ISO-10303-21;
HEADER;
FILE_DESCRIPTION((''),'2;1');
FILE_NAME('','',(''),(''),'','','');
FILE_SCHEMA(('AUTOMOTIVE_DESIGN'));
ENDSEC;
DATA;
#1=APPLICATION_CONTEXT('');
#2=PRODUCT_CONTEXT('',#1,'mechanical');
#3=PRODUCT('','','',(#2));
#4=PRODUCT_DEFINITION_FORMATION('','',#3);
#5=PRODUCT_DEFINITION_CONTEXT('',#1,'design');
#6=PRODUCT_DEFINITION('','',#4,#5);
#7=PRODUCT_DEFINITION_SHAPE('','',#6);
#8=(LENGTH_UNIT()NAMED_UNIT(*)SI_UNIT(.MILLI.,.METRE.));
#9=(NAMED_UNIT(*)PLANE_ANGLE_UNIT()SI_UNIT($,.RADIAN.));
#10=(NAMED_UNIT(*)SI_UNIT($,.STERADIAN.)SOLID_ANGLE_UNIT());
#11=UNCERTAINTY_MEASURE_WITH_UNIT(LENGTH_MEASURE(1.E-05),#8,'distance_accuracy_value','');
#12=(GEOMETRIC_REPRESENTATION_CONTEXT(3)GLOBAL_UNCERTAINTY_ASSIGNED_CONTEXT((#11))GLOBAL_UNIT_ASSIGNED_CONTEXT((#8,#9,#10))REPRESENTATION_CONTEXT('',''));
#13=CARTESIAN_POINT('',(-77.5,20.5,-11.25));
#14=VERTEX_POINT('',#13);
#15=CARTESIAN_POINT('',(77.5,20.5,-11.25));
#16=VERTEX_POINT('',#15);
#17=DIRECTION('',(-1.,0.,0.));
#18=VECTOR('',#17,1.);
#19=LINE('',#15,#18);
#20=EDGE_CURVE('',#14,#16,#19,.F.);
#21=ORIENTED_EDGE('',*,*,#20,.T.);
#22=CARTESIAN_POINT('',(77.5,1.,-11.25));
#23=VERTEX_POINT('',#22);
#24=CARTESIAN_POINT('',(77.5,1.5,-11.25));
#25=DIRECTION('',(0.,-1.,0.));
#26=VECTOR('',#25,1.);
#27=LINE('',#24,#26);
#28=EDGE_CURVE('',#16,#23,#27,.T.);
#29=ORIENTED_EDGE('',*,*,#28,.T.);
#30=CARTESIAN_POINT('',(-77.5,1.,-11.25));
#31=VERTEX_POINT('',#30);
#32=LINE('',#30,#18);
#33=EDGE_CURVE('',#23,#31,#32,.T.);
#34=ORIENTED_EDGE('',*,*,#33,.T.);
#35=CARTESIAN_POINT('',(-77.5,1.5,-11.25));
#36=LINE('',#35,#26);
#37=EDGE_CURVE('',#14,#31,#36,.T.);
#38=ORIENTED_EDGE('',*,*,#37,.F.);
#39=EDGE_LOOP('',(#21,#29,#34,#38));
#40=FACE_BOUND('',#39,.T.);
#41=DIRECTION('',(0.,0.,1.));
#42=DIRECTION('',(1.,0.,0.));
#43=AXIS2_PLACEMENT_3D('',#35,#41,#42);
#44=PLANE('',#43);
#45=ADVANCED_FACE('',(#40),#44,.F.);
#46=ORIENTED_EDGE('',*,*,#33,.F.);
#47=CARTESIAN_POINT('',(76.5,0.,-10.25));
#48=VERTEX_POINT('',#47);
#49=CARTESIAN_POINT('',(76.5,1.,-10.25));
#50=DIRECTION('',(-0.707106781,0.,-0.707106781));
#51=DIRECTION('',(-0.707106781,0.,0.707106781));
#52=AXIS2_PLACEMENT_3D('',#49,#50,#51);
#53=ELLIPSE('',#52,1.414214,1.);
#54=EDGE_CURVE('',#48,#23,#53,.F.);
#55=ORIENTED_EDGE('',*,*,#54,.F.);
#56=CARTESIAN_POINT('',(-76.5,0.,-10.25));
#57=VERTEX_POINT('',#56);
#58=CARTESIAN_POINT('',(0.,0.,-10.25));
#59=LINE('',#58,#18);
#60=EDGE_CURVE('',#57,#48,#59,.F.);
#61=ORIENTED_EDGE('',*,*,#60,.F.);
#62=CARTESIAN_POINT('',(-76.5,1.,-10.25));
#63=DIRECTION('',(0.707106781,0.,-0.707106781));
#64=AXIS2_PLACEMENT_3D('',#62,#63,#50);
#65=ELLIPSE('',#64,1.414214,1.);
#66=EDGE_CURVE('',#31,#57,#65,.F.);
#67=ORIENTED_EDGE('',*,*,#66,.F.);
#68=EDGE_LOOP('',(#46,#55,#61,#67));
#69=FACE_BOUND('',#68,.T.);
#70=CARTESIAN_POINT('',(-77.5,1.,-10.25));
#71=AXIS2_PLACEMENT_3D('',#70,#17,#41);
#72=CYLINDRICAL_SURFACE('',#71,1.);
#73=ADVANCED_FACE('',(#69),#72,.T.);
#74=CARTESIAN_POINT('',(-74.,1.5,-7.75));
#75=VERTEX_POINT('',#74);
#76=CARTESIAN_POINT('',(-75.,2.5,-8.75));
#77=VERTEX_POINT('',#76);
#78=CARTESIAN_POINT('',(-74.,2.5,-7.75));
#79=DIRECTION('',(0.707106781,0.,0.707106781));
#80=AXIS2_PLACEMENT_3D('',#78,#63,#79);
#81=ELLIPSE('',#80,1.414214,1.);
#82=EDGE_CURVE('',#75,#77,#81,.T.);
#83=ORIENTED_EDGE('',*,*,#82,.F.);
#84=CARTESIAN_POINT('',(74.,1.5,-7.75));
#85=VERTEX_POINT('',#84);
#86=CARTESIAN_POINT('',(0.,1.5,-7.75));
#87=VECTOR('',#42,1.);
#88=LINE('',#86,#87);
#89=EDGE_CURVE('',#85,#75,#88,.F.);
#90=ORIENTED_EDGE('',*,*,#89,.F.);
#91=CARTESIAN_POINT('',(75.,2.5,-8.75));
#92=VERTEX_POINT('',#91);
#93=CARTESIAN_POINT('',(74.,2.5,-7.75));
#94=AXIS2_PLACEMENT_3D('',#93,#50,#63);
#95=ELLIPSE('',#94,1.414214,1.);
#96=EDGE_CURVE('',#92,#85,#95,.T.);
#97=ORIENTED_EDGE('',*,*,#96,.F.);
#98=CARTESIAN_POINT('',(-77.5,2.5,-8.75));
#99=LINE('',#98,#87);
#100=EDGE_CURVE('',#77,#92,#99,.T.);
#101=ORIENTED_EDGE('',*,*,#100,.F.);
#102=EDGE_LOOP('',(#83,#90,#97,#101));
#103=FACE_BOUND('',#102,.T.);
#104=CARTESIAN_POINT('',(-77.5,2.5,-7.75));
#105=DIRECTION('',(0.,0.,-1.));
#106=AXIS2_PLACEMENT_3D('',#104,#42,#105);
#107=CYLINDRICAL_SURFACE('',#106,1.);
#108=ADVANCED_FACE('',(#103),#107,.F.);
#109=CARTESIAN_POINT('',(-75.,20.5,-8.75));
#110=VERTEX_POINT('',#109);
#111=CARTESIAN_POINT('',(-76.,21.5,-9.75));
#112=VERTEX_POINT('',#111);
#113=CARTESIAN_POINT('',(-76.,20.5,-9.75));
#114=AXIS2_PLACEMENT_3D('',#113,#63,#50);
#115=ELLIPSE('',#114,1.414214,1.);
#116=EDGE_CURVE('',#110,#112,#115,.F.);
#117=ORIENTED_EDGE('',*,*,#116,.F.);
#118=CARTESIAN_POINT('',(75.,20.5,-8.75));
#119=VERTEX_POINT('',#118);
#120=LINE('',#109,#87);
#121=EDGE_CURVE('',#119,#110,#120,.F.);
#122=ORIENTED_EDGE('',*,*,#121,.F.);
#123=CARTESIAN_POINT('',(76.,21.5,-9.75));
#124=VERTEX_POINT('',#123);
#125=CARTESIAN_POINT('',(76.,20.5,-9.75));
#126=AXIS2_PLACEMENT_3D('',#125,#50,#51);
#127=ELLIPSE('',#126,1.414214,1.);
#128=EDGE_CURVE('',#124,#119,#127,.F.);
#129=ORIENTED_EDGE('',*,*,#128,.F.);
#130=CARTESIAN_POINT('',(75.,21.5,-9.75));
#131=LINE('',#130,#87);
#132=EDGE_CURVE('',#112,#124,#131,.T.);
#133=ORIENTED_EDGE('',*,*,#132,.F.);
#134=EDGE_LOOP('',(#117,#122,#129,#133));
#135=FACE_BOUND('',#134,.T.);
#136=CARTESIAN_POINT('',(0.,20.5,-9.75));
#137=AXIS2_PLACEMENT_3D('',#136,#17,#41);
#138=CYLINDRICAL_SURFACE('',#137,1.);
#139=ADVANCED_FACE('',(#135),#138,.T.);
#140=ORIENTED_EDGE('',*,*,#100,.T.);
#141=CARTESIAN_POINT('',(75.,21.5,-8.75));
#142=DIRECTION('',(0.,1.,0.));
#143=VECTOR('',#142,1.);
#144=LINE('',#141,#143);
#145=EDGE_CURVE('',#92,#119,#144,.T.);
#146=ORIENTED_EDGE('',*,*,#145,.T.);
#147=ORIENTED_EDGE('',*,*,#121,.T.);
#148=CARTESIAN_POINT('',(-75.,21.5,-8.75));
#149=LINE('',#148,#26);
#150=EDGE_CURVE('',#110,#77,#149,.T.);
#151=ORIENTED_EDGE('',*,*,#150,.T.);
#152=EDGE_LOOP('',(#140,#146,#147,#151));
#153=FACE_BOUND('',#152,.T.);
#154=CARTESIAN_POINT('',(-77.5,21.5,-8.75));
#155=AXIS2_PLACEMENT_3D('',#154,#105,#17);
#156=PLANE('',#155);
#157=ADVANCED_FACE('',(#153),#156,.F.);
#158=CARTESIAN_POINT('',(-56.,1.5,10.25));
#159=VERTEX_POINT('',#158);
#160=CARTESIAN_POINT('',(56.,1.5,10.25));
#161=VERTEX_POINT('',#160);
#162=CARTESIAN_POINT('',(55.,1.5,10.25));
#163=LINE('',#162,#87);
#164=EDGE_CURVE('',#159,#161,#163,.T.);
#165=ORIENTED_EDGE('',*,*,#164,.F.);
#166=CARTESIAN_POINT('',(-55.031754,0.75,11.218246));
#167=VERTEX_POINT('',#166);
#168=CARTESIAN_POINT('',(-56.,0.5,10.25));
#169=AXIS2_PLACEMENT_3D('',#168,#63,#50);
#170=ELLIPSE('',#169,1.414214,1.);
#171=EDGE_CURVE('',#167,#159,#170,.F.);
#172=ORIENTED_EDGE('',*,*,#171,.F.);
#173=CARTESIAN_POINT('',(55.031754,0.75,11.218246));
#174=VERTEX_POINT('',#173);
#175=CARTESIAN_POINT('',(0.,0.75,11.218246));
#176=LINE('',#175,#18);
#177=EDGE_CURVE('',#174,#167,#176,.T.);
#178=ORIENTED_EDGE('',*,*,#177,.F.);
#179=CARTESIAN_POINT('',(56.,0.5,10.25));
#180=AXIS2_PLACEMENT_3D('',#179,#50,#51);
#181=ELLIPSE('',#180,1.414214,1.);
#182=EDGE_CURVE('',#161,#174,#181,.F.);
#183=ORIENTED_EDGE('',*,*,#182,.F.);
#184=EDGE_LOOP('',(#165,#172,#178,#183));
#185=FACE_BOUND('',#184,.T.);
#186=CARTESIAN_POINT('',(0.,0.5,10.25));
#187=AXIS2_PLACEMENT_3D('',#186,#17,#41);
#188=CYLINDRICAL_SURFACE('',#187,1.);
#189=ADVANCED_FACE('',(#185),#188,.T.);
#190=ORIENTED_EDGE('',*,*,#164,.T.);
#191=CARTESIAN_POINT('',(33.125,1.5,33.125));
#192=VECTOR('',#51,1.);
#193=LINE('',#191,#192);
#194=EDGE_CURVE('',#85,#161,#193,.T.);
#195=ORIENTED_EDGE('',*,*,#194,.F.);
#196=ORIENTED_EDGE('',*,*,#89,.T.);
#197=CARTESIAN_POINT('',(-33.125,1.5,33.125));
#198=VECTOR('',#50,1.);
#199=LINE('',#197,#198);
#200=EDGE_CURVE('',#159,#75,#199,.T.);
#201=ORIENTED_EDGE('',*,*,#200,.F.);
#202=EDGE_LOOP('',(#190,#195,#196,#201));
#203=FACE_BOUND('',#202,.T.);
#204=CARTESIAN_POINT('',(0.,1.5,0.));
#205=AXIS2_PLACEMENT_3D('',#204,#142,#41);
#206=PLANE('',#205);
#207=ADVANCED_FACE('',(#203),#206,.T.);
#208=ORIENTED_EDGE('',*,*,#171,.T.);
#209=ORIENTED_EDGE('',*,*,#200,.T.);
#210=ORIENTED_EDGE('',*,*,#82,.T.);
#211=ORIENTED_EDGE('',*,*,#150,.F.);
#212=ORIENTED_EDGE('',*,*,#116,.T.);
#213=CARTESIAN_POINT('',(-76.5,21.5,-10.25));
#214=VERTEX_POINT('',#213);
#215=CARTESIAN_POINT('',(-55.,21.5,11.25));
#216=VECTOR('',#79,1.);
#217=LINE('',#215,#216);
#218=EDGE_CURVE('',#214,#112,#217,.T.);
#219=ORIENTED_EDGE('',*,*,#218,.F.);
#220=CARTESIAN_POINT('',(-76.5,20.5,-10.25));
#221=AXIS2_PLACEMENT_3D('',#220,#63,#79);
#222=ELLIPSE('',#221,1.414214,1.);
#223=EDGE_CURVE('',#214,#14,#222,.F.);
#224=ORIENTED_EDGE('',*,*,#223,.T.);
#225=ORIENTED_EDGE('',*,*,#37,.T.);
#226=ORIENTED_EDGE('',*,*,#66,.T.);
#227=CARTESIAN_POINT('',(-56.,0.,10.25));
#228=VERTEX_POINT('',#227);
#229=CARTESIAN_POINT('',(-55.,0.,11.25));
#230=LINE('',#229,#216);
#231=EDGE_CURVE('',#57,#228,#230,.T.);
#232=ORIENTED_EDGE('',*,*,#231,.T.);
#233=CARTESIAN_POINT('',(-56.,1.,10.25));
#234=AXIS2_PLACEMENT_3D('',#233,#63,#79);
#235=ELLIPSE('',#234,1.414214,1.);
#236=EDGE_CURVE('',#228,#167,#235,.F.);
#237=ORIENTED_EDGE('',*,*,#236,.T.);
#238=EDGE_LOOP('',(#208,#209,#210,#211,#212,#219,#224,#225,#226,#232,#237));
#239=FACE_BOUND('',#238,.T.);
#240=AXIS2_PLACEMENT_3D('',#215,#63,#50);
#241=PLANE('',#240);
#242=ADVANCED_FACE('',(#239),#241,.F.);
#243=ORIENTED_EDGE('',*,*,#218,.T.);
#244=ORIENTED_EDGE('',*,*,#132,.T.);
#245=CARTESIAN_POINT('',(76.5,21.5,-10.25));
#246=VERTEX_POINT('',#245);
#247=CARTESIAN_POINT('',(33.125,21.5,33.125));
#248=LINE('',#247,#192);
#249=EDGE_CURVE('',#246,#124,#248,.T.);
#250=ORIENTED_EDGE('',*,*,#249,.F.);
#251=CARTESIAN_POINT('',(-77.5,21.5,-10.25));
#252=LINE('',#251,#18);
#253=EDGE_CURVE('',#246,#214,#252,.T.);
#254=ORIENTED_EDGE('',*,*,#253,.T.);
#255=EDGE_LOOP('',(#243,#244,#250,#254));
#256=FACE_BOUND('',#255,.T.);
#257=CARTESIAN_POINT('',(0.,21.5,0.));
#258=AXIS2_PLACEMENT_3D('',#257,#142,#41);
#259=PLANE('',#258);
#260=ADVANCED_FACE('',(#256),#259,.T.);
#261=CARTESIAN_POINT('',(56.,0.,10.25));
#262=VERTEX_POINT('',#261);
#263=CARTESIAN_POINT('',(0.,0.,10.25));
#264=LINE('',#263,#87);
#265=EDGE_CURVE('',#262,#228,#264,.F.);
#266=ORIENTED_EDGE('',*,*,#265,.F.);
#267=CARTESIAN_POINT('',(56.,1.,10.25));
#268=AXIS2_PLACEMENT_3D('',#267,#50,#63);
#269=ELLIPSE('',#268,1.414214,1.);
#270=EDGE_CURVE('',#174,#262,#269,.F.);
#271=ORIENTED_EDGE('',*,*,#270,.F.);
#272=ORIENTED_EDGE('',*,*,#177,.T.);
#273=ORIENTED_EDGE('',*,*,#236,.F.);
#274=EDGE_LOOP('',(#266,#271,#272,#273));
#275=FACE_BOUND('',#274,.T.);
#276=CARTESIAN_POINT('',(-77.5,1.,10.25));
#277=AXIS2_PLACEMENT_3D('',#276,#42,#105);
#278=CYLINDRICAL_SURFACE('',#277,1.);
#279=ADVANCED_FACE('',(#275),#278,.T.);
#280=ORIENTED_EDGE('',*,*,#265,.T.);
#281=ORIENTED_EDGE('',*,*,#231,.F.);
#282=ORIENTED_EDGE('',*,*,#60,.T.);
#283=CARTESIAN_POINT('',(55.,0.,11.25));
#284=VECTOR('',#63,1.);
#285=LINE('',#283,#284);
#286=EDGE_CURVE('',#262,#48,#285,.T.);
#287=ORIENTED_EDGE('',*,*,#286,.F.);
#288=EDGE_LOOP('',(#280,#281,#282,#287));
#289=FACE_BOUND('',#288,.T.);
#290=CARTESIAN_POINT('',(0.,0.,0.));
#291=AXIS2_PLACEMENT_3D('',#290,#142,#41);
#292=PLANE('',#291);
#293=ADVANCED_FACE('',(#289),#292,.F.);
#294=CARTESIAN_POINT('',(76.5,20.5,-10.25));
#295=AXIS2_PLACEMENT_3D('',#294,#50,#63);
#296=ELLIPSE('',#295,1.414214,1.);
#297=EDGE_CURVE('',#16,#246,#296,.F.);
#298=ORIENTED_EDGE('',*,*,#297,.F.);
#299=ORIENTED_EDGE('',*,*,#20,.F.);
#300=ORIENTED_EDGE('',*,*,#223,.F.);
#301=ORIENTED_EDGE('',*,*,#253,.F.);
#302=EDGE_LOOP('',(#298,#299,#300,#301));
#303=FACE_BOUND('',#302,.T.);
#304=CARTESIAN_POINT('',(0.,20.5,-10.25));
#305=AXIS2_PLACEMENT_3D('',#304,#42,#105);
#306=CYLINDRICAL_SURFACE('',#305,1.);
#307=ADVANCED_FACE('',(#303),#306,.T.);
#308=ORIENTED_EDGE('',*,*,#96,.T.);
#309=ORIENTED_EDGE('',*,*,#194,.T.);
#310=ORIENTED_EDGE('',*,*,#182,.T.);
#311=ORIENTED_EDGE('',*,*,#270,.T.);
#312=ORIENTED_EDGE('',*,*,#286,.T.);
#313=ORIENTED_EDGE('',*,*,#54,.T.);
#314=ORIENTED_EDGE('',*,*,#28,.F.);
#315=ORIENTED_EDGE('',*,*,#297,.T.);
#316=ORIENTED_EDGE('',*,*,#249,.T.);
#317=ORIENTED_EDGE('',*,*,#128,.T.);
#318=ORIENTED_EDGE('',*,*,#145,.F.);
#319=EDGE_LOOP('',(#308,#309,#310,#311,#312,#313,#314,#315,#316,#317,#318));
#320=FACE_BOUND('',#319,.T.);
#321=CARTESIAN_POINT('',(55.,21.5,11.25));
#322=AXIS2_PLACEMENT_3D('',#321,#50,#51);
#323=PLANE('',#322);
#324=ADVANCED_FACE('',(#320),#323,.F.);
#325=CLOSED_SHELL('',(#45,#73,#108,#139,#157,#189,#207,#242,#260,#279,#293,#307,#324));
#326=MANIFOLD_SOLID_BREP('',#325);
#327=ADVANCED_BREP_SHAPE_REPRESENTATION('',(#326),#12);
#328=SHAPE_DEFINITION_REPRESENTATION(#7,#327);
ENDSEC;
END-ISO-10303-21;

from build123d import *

# Parameters (mm, degrees)
SKETCH1_W           = 155
SKETCH1_H           = 22.5
BOSS_EXTRUDE1_DEPTH = 1.5
SKETCH2_W           = 155
SKETCH2_H           = 2.5
BOSS_EXTRUDE2_DEPTH = 20
CUT_EXTRUDE2_DEPTH  = 82.209990149
FILLET1_R           = 1


with BuildPart() as part:
    # Sketch1 → Boss-Extrude1 (new body)
    with BuildSketch(Plane(origin=(0, 0, 0), x_dir=(1, 0, 0), z_dir=(0, 1, 0))):
        Rectangle(SKETCH1_W, SKETCH1_H)
    extrude(amount=BOSS_EXTRUDE1_DEPTH)

    # Sketch2 → Boss-Extrude2 (add)
    with BuildSketch(Plane(origin=(0, 1.5, 0), x_dir=(1, 0, 0), z_dir=(0, 1, 0))):
        with Locations((0, 10)):
            Rectangle(SKETCH2_W, SKETCH2_H)
    extrude(amount=BOSS_EXTRUDE2_DEPTH)

    # Sketch3 → Cut-Extrude2 (cut, through all)
    with BuildSketch(Plane(origin=(0, 0, 0), x_dir=(-1, 0, 0), z_dir=(0, -1, 0))):
        Polygon((-77.5, -11.25), (-55, -11.25), (-77.5, 11.25), align=None)
        Polygon((77.5, -11.25), (77.5, 11.25), (55, -11.25), align=None)
    extrude(amount=-CUT_EXTRUDE2_DEPTH, mode=Mode.SUBTRACT)

    # Fillet1
    # the kernel refuses this fillet: 1 mm, written as the material it adds along each edge
    with BuildSketch(Plane(origin=(77.5, 1.5, -8.75), x_dir=(0, 0, 1), z_dir=(-1, 0, 0))) as fillet1_piece_1_section:
        with BuildLine():
            CenterArc((FILLET1_R, FILLET1_R), FILLET1_R, 180, 90)
            Line((0, FILLET1_R), (0, 0))
            Line((0, 0), (FILLET1_R, 0))
        make_face()
    fillet1_piece_1 = extrude(amount=155, mode=Mode.PRIVATE)
    fillet1_piece_1 = split(fillet1_piece_1, bisect_by=Plane(origin=(-37.387113225, 1.726762312, 28.862886775), z_dir=(0.7071067811865436, 0, -0.7071067811865515)), keep=Keep.TOP, mode=Mode.PRIVATE)
    fillet1_piece_1 = split(fillet1_piece_1, bisect_by=Plane(origin=(37.387113225, 1.726762312, 28.862886775), z_dir=(-0.7071067811865492, 0, -0.7071067811865458)), keep=Keep.TOP, mode=Mode.PRIVATE)
    add(fillet1_piece_1)
    # the kernel refuses this fillet: 1 mm, written as the material it takes off along each edge
    with BuildSketch(Plane(origin=(-80, 0, -11.25), x_dir=(0, 1, 0), z_dir=(1, 0, 0))) as fillet1_2_piece_1:
        with BuildLine():
            CenterArc((FILLET1_R, FILLET1_R), FILLET1_R, 180, 90)
            Line((0, FILLET1_R), (0, 0))
            Line((0, 0), (FILLET1_R, 0))
        make_face()
    extrude(amount=160, mode=Mode.SUBTRACT)
    with BuildSketch(Plane(origin=(-80, 21.5, -11.25), x_dir=(0, -1, 0), z_dir=(1, 0, 0))) as fillet1_2_piece_2:
        with BuildLine():
            CenterArc((FILLET1_R, -FILLET1_R), FILLET1_R, 90, 90)
            Line((0, -FILLET1_R), (0, 0))
            Line((0, 0), (FILLET1_R, 0))
        make_face()
    extrude(amount=160, mode=Mode.SUBTRACT)
    with BuildSketch(Plane(origin=(57.5, 0, 11.25), x_dir=(0, 0, -1), z_dir=(-1, 0, 0)), Plane(origin=(57.5, 1.5, 11.25), x_dir=(0, -1, 0), z_dir=(-1, 0, 0))) as fillet1_2_piece_3:
        with BuildLine():
            CenterArc((FILLET1_R, -FILLET1_R), FILLET1_R, 90, 90)
            Line((0, -FILLET1_R), (0, 0))
            Line((0, 0), (FILLET1_R, 0))
        make_face()
    extrude(amount=115, mode=Mode.SUBTRACT)
    with BuildSketch(Plane(origin=(77.5, 21.5, -8.75), x_dir=(0, 0, -1), z_dir=(-1, 0, 0))) as fillet1_2_piece_4:
        with BuildLine():
            CenterArc((FILLET1_R, FILLET1_R), FILLET1_R, 180, 90)
            Line((0, FILLET1_R), (0, 0))
            Line((0, 0), (FILLET1_R, 0))
        make_face()
    extrude(amount=155, mode=Mode.SUBTRACT)


solid = part.part
